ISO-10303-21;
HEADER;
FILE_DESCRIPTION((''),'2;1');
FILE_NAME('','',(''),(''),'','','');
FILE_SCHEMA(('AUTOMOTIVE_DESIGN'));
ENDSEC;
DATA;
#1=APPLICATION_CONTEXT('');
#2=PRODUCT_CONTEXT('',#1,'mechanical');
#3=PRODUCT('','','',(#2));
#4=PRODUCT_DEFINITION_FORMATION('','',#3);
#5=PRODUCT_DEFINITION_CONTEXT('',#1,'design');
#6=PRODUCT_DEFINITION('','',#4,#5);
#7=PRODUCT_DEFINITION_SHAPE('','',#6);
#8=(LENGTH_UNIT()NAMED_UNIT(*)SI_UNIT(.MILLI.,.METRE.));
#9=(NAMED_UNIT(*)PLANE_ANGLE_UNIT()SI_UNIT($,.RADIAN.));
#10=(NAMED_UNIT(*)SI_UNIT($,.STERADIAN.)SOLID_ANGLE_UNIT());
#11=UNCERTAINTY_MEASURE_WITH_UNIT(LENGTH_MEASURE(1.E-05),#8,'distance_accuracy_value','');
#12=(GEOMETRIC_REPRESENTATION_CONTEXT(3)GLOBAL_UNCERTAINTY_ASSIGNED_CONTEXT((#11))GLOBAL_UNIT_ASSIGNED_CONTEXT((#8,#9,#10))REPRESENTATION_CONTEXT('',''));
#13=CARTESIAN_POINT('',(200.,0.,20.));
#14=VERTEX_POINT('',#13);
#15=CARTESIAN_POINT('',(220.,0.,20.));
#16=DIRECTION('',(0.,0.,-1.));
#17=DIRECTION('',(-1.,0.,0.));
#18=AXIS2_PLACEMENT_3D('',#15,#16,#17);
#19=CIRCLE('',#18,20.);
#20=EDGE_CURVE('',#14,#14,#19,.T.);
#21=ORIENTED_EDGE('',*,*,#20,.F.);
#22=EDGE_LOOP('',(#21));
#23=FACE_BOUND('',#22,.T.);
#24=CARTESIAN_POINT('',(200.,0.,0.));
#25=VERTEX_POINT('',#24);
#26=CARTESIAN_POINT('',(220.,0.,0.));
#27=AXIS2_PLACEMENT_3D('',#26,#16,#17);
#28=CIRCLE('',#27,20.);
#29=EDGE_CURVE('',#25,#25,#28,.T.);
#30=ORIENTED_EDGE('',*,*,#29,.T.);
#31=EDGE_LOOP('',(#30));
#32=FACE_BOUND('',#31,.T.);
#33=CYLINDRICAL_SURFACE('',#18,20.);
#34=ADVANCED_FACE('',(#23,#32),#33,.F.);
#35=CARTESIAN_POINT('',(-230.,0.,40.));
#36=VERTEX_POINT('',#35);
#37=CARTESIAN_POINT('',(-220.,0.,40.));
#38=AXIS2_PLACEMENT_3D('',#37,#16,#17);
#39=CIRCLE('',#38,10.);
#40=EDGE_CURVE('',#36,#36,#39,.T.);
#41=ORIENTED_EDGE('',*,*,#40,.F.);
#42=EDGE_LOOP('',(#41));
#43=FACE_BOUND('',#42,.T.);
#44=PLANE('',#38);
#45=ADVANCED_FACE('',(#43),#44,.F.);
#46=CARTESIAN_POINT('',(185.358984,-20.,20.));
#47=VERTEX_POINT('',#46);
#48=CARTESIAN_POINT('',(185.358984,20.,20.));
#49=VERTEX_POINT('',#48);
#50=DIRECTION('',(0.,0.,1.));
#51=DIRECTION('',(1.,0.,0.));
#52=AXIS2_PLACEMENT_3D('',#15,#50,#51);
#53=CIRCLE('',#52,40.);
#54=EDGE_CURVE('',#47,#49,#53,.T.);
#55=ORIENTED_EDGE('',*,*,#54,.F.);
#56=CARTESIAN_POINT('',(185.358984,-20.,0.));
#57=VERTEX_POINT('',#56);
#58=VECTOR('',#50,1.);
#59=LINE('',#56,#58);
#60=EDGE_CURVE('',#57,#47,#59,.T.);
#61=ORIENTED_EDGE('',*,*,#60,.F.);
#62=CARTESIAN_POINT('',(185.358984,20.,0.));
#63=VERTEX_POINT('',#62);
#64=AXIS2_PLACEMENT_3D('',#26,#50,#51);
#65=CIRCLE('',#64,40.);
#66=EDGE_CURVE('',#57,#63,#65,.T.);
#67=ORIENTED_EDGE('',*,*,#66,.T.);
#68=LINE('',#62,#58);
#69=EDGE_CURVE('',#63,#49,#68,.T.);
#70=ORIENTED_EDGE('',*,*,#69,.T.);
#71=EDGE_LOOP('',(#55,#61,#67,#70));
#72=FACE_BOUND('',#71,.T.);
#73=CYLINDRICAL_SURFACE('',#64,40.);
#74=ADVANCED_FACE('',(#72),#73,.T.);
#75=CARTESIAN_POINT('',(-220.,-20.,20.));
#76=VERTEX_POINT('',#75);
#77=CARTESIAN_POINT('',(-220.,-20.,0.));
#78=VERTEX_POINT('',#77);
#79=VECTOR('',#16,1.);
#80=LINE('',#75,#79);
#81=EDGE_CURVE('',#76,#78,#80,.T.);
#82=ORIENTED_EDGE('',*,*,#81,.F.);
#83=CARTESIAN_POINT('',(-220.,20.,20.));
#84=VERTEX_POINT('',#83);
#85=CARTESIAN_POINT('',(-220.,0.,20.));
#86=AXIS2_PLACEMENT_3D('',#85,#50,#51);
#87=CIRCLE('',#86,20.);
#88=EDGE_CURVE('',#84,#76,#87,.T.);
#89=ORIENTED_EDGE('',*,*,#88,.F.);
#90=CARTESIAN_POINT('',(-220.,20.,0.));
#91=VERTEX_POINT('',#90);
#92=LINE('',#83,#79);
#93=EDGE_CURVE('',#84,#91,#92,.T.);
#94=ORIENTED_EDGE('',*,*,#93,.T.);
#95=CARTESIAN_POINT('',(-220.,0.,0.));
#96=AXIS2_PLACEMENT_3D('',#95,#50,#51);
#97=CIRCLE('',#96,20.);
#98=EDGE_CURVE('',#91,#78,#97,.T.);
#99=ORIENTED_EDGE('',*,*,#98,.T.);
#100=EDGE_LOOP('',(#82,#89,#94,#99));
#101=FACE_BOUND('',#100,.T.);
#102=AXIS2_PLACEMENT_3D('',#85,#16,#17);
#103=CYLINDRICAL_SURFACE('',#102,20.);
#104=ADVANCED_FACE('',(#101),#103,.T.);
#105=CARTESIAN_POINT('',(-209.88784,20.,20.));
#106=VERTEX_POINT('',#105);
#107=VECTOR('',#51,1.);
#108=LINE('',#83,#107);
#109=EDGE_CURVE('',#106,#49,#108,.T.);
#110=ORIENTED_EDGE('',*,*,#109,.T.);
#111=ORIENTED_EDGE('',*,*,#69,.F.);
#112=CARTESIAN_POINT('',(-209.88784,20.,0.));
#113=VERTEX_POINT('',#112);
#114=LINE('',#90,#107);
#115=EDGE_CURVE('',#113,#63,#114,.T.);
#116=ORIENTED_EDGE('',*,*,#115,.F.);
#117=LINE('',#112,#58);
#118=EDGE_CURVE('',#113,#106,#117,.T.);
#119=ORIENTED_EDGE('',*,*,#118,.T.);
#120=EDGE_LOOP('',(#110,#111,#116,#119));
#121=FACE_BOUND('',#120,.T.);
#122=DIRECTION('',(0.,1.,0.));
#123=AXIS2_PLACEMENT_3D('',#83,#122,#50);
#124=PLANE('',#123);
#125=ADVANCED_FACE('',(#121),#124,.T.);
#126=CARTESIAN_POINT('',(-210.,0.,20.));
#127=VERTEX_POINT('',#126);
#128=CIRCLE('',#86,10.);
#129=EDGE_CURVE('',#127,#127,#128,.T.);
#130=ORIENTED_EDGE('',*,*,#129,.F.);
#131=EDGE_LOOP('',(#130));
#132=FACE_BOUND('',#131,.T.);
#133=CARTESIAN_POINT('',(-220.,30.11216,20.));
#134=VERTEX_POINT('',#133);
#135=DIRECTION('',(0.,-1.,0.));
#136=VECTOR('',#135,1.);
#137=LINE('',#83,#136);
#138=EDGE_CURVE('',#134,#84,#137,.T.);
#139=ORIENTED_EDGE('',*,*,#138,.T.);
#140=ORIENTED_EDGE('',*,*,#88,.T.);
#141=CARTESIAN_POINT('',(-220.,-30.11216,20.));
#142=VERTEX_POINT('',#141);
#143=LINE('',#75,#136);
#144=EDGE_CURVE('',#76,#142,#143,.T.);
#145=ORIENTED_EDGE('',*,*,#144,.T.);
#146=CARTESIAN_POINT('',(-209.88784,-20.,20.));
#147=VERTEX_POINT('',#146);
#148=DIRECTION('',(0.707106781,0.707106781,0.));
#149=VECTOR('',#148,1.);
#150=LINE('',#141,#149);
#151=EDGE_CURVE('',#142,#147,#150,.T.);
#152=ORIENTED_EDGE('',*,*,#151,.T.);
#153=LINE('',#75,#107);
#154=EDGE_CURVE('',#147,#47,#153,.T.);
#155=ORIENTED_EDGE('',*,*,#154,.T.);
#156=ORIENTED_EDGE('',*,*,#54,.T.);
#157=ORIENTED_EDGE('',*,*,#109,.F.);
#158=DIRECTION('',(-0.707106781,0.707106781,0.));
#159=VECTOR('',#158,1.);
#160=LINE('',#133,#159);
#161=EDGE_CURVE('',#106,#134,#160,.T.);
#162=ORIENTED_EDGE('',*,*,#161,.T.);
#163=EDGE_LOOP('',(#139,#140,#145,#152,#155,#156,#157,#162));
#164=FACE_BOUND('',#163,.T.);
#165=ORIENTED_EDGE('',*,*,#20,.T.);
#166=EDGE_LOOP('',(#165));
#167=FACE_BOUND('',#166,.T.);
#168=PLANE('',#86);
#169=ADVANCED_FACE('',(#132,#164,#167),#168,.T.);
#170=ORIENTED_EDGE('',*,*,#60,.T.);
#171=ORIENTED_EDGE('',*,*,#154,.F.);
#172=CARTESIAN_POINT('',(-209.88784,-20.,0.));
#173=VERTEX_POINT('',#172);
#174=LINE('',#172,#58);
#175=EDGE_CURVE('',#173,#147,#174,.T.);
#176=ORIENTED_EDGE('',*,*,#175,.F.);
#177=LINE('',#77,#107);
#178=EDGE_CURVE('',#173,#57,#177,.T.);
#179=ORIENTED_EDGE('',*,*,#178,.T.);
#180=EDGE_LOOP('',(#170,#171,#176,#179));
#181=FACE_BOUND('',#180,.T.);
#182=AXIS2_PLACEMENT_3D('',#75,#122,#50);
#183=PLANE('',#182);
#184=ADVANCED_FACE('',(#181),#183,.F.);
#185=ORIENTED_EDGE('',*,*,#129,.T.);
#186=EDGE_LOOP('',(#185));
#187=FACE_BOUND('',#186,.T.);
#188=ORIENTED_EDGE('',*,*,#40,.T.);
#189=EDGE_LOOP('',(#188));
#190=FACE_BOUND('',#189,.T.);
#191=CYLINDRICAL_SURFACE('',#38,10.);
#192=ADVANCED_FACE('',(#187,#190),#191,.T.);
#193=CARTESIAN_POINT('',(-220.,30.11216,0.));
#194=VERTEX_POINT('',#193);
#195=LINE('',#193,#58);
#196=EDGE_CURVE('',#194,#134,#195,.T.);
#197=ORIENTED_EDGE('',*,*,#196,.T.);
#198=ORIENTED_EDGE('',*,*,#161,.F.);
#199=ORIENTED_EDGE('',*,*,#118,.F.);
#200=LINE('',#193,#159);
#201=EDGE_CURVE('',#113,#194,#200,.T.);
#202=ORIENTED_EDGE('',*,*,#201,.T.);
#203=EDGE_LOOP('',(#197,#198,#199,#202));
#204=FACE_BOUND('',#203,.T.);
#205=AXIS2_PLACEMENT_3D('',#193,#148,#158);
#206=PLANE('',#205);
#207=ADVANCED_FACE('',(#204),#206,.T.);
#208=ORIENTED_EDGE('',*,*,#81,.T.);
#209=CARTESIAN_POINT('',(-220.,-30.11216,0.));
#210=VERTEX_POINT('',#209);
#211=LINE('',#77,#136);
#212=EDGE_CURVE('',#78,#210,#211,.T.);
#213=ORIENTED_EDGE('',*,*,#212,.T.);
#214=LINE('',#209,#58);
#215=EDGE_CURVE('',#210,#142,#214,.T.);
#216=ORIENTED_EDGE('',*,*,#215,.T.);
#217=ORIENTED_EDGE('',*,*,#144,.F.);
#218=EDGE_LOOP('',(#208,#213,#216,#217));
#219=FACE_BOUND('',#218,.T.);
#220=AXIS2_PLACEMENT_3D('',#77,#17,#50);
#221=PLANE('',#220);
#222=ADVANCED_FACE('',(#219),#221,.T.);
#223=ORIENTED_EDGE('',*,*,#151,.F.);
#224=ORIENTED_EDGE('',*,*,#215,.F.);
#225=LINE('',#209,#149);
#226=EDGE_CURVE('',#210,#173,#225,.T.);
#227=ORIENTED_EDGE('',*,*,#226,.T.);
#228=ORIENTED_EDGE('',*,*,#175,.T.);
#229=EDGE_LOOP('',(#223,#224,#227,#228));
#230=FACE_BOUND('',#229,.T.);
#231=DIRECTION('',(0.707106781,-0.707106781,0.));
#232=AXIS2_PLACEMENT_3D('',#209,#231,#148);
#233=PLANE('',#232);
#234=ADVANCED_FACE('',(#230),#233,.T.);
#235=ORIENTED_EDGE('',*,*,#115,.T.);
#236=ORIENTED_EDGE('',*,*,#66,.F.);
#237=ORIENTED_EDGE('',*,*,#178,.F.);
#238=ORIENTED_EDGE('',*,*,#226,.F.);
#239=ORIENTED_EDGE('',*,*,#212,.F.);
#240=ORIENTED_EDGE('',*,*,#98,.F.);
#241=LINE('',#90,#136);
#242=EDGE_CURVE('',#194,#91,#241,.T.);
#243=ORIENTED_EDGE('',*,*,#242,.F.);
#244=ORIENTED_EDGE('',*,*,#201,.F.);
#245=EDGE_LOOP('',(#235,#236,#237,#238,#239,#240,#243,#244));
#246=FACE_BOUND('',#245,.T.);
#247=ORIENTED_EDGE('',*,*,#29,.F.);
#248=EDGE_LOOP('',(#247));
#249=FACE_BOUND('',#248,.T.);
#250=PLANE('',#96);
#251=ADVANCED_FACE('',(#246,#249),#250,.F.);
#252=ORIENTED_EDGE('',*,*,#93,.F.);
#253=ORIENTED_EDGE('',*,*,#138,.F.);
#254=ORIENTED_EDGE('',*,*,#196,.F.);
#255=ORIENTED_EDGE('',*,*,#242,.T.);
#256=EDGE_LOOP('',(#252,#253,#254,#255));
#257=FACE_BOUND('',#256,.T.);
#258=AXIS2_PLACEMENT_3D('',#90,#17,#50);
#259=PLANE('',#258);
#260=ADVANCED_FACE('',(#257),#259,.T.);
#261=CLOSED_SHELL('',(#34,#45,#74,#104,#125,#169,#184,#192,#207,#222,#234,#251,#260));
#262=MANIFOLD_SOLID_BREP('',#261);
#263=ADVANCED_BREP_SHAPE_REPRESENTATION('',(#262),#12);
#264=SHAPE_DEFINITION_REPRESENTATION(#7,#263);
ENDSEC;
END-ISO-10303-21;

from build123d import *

# Parameters (mm, degrees)
BOSS_EXTRUDE1_DEPTH    = 20
SKETCH2_R              = 10
CUT_EXTRUDE1_DEPTH     = 20
SPUR_START             = 143.992112376
SPUR_GEAR_AM_OUTLINE_R = 5
SPUR_GEAR_AM_DEPTH     = 10
SKETCH4_R              = 40
BOSS_EXTRUDE2_DEPTH    = 20
BOSS_EXTRUDE3_DEPTH    = 20
SKETCH5_R              = 20
CUT_EXTRUDE4_DEPTH     = 20
BOSS_EXTRUDE4_START    = -40
SKETCH8_R              = 10
BOSS_EXTRUDE4_DEPTH    = 40


# Read off the part's stored shape, not the designer's step: spur gear_am
with BuildPart() as part:
    # Sketch1 → Boss-Extrude1 (new body)
    with BuildSketch(Plane.XY):
        with BuildLine():
            Line((-220, 20), (220, 20))
            ThreePointArc((220, 20), (240, 0), (220, -20))
            Line((220, -20), (-220, -20))
            ThreePointArc((-220, -20), (-240, 0), (-220, 20))
        make_face()
    extrude(amount=BOSS_EXTRUDE1_DEPTH)

    # Sketch2 → Cut-Extrude1 (cut)
    with BuildSketch(Plane.XY.offset(20)):
        with Locations((220, 0)):
            Circle(SKETCH2_R)
        with Locations((-220, 0)):
            Circle(SKETCH2_R)
    extrude(amount=-CUT_EXTRUDE1_DEPTH, mode=Mode.SUBTRACT)

    # Sketch4 → Boss-Extrude2 (add)
    with BuildSketch(Plane.XY.offset(20)):
        with Locations((220, 0)):
            Circle(SKETCH4_R)
    extrude(amount=-BOSS_EXTRUDE2_DEPTH)

    # Sketch6 → Boss-Extrude3 (add)
    with BuildSketch(Plane.XY.offset(20)):
        Polygon((-220, -20), (-220, -30.112160349), (-209.887839651, -20), align=None)
        Polygon((-209.887839651, 20), (-220, 20), (-220, 30.112160349), align=None)
    extrude(amount=-BOSS_EXTRUDE3_DEPTH)

    # Sketch5 → Cut-Extrude4 (cut)
    with BuildSketch(Plane(origin=(0, 0, 0), x_dir=(-1, 0, 0), z_dir=(0, 0, -1))):
        with Locations((-220, 0)):
            Circle(SKETCH5_R)
    extrude(amount=-CUT_EXTRUDE4_DEPTH, mode=Mode.SUBTRACT)

    # Sketch8 → Boss-Extrude4 (add)
    with BuildSketch(Plane(origin=(0, 0, 0), x_dir=(-1, 0, 0), z_dir=(0, 0, -1)).offset(BOSS_EXTRUDE4_START)):
        with Locations((220, 0)):
            Circle(SKETCH8_R)
    extrude(amount=BOSS_EXTRUDE4_DEPTH)


with BuildPart() as body_2:
    # spur gear_am outline → spur gear_am (new body)
    with BuildSketch(Plane.YZ.offset(SPUR_START)):
        with BuildLine():
            ThreePointArc((13.133221577, -371.123184299), (13.390101578, -371.125934087), (13.646981578, -371.123184299))
            ThreePointArc((13.646981578, -371.123184299), (14.846401327, -368.975865304), (14.562642986, -366.532697728))
            ThreePointArc((14.562642986, -366.532697728), (15.707420018, -366.257906902), (16.795082087, -365.807334294))
            ThreePointArc((16.795082087, -365.807334294), (18.001574637, -367.950687351), (20.234088035, -368.982903671))
            ThreePointArc((20.234088035, -368.982903671), (20.443524605, -368.834138019), (20.649728607, -368.680923118))
            ThreePointArc((20.649728607, -368.680923118), (20.35791713, -366.238704319), (18.69229394, -364.428929198))
            ThreePointArc((18.69229394, -364.428929198), (19.456920018, -363.533735693), (20.072017182, -362.529903073))
            ThreePointArc((20.072017182, -362.529903073), (22.307921476, -363.554753593), (24.720784284, -363.077595687))
            ThreePointArc((24.720784284, -363.077595687), (24.802779773, -362.834138019), (24.879544856, -362.588980889))
            ThreePointArc((24.879544856, -362.588980889), (23.207964219, -360.78470686), (20.796687626, -360.299596778))
            ThreePointArc((20.796687626, -360.299596778), (20.889101578, -359.125934087), (20.796687626, -357.952271396))
            ThreePointArc((20.796687626, -357.952271396), (23.207964219, -357.467161313), (24.879544856, -355.662887284))
            ThreePointArc((24.879544856, -355.662887284), (24.802779773, -355.417730154), (24.720784284, -355.174272487))
            ThreePointArc((24.720784284, -355.174272487), (22.307921476, -354.697114581), (20.072017182, -355.7219651))
            ThreePointArc((20.072017182, -355.7219651), (19.456920018, -354.71813248), (18.69229394, -353.822938975))
            ThreePointArc((18.69229394, -353.822938975), (20.35791713, -352.013163854), (20.649728607, -349.570945055))
            ThreePointArc((20.649728607, -349.570945055), (20.443524605, -349.417730154), (20.234088035, -349.268964503))
            ThreePointArc((20.234088035, -349.268964503), (18.001574638, -350.301180822), (16.795082087, -352.444533879))
            ThreePointArc((16.795082087, -352.444533879), (15.707420018, -351.993961271), (14.562642986, -351.719170445))
            ThreePointArc((14.562642986, -351.719170445), (14.846401327, -349.276002869), (13.646981578, -347.128683874))
            ThreePointArc((13.646981578, -347.128683874), (13.390101577, -347.125934087), (13.133221577, -347.128683874))
            ThreePointArc((13.133221577, -347.128683874), (11.933801828, -349.276002869), (12.217560169, -351.719170445))
            ThreePointArc((12.217560169, -351.719170445), (11.072783137, -351.993961271), (9.985121068, -352.444533879))
            ThreePointArc((9.985121068, -352.444533879), (8.778628518, -350.301180823), (6.546115121, -349.268964503))
            ThreePointArc((6.546115121, -349.268964503), (6.33667855, -349.417730154), (6.130474548, -349.570945055))
            ThreePointArc((6.130474548, -349.570945055), (6.422286026, -352.013163854), (8.087909215, -353.822938975))
            ThreePointArc((8.087909215, -353.822938975), (7.323283137, -354.71813248), (6.708185973, -355.7219651))
            ThreePointArc((6.708185973, -355.7219651), (4.472281679, -354.697114581), (2.059418871, -355.174272487))
            ThreePointArc((2.059418871, -355.174272487), (1.977423382, -355.417730154), (1.900658299, -355.662887284))
            ThreePointArc((1.900658299, -355.662887284), (3.572238937, -357.467161313), (5.98351553, -357.952271396))
            ThreePointArc((5.98351553, -357.952271396), (5.891101578, -359.125934087), (5.98351553, -360.299596778))
            ThreePointArc((5.98351553, -360.299596778), (3.572238937, -360.78470686), (1.900658299, -362.588980889))
            ThreePointArc((1.900658299, -362.588980889), (1.977423382, -362.834138019), (2.059418871, -363.077595687))
            ThreePointArc((2.059418871, -363.077595687), (4.472281679, -363.554753593), (6.708185973, -362.529903073))
            ThreePointArc((6.708185973, -362.529903073), (7.323283137, -363.533735693), (8.087909215, -364.428929198))
            ThreePointArc((8.087909215, -364.428929198), (6.422286026, -366.23870432), (6.130474548, -368.680923118))
            ThreePointArc((6.130474548, -368.680923118), (6.33667855, -368.834138019), (6.546115121, -368.982903671))
            ThreePointArc((6.546115121, -368.982903671), (8.778628518, -367.950687351), (9.985121068, -365.807334294))
            ThreePointArc((9.985121068, -365.807334294), (11.072783137, -366.257906902), (12.217560169, -366.532697728))
            ThreePointArc((12.217560169, -366.532697728), (11.933801828, -368.975865304), (13.133221577, -371.123184299))
        make_face()
        with Locations((13.390101578, -359.125934087)):
            Circle(SPUR_GEAR_AM_OUTLINE_R, mode=Mode.SUBTRACT)
    extrude(amount=SPUR_GEAR_AM_DEPTH)


solid = part.part
